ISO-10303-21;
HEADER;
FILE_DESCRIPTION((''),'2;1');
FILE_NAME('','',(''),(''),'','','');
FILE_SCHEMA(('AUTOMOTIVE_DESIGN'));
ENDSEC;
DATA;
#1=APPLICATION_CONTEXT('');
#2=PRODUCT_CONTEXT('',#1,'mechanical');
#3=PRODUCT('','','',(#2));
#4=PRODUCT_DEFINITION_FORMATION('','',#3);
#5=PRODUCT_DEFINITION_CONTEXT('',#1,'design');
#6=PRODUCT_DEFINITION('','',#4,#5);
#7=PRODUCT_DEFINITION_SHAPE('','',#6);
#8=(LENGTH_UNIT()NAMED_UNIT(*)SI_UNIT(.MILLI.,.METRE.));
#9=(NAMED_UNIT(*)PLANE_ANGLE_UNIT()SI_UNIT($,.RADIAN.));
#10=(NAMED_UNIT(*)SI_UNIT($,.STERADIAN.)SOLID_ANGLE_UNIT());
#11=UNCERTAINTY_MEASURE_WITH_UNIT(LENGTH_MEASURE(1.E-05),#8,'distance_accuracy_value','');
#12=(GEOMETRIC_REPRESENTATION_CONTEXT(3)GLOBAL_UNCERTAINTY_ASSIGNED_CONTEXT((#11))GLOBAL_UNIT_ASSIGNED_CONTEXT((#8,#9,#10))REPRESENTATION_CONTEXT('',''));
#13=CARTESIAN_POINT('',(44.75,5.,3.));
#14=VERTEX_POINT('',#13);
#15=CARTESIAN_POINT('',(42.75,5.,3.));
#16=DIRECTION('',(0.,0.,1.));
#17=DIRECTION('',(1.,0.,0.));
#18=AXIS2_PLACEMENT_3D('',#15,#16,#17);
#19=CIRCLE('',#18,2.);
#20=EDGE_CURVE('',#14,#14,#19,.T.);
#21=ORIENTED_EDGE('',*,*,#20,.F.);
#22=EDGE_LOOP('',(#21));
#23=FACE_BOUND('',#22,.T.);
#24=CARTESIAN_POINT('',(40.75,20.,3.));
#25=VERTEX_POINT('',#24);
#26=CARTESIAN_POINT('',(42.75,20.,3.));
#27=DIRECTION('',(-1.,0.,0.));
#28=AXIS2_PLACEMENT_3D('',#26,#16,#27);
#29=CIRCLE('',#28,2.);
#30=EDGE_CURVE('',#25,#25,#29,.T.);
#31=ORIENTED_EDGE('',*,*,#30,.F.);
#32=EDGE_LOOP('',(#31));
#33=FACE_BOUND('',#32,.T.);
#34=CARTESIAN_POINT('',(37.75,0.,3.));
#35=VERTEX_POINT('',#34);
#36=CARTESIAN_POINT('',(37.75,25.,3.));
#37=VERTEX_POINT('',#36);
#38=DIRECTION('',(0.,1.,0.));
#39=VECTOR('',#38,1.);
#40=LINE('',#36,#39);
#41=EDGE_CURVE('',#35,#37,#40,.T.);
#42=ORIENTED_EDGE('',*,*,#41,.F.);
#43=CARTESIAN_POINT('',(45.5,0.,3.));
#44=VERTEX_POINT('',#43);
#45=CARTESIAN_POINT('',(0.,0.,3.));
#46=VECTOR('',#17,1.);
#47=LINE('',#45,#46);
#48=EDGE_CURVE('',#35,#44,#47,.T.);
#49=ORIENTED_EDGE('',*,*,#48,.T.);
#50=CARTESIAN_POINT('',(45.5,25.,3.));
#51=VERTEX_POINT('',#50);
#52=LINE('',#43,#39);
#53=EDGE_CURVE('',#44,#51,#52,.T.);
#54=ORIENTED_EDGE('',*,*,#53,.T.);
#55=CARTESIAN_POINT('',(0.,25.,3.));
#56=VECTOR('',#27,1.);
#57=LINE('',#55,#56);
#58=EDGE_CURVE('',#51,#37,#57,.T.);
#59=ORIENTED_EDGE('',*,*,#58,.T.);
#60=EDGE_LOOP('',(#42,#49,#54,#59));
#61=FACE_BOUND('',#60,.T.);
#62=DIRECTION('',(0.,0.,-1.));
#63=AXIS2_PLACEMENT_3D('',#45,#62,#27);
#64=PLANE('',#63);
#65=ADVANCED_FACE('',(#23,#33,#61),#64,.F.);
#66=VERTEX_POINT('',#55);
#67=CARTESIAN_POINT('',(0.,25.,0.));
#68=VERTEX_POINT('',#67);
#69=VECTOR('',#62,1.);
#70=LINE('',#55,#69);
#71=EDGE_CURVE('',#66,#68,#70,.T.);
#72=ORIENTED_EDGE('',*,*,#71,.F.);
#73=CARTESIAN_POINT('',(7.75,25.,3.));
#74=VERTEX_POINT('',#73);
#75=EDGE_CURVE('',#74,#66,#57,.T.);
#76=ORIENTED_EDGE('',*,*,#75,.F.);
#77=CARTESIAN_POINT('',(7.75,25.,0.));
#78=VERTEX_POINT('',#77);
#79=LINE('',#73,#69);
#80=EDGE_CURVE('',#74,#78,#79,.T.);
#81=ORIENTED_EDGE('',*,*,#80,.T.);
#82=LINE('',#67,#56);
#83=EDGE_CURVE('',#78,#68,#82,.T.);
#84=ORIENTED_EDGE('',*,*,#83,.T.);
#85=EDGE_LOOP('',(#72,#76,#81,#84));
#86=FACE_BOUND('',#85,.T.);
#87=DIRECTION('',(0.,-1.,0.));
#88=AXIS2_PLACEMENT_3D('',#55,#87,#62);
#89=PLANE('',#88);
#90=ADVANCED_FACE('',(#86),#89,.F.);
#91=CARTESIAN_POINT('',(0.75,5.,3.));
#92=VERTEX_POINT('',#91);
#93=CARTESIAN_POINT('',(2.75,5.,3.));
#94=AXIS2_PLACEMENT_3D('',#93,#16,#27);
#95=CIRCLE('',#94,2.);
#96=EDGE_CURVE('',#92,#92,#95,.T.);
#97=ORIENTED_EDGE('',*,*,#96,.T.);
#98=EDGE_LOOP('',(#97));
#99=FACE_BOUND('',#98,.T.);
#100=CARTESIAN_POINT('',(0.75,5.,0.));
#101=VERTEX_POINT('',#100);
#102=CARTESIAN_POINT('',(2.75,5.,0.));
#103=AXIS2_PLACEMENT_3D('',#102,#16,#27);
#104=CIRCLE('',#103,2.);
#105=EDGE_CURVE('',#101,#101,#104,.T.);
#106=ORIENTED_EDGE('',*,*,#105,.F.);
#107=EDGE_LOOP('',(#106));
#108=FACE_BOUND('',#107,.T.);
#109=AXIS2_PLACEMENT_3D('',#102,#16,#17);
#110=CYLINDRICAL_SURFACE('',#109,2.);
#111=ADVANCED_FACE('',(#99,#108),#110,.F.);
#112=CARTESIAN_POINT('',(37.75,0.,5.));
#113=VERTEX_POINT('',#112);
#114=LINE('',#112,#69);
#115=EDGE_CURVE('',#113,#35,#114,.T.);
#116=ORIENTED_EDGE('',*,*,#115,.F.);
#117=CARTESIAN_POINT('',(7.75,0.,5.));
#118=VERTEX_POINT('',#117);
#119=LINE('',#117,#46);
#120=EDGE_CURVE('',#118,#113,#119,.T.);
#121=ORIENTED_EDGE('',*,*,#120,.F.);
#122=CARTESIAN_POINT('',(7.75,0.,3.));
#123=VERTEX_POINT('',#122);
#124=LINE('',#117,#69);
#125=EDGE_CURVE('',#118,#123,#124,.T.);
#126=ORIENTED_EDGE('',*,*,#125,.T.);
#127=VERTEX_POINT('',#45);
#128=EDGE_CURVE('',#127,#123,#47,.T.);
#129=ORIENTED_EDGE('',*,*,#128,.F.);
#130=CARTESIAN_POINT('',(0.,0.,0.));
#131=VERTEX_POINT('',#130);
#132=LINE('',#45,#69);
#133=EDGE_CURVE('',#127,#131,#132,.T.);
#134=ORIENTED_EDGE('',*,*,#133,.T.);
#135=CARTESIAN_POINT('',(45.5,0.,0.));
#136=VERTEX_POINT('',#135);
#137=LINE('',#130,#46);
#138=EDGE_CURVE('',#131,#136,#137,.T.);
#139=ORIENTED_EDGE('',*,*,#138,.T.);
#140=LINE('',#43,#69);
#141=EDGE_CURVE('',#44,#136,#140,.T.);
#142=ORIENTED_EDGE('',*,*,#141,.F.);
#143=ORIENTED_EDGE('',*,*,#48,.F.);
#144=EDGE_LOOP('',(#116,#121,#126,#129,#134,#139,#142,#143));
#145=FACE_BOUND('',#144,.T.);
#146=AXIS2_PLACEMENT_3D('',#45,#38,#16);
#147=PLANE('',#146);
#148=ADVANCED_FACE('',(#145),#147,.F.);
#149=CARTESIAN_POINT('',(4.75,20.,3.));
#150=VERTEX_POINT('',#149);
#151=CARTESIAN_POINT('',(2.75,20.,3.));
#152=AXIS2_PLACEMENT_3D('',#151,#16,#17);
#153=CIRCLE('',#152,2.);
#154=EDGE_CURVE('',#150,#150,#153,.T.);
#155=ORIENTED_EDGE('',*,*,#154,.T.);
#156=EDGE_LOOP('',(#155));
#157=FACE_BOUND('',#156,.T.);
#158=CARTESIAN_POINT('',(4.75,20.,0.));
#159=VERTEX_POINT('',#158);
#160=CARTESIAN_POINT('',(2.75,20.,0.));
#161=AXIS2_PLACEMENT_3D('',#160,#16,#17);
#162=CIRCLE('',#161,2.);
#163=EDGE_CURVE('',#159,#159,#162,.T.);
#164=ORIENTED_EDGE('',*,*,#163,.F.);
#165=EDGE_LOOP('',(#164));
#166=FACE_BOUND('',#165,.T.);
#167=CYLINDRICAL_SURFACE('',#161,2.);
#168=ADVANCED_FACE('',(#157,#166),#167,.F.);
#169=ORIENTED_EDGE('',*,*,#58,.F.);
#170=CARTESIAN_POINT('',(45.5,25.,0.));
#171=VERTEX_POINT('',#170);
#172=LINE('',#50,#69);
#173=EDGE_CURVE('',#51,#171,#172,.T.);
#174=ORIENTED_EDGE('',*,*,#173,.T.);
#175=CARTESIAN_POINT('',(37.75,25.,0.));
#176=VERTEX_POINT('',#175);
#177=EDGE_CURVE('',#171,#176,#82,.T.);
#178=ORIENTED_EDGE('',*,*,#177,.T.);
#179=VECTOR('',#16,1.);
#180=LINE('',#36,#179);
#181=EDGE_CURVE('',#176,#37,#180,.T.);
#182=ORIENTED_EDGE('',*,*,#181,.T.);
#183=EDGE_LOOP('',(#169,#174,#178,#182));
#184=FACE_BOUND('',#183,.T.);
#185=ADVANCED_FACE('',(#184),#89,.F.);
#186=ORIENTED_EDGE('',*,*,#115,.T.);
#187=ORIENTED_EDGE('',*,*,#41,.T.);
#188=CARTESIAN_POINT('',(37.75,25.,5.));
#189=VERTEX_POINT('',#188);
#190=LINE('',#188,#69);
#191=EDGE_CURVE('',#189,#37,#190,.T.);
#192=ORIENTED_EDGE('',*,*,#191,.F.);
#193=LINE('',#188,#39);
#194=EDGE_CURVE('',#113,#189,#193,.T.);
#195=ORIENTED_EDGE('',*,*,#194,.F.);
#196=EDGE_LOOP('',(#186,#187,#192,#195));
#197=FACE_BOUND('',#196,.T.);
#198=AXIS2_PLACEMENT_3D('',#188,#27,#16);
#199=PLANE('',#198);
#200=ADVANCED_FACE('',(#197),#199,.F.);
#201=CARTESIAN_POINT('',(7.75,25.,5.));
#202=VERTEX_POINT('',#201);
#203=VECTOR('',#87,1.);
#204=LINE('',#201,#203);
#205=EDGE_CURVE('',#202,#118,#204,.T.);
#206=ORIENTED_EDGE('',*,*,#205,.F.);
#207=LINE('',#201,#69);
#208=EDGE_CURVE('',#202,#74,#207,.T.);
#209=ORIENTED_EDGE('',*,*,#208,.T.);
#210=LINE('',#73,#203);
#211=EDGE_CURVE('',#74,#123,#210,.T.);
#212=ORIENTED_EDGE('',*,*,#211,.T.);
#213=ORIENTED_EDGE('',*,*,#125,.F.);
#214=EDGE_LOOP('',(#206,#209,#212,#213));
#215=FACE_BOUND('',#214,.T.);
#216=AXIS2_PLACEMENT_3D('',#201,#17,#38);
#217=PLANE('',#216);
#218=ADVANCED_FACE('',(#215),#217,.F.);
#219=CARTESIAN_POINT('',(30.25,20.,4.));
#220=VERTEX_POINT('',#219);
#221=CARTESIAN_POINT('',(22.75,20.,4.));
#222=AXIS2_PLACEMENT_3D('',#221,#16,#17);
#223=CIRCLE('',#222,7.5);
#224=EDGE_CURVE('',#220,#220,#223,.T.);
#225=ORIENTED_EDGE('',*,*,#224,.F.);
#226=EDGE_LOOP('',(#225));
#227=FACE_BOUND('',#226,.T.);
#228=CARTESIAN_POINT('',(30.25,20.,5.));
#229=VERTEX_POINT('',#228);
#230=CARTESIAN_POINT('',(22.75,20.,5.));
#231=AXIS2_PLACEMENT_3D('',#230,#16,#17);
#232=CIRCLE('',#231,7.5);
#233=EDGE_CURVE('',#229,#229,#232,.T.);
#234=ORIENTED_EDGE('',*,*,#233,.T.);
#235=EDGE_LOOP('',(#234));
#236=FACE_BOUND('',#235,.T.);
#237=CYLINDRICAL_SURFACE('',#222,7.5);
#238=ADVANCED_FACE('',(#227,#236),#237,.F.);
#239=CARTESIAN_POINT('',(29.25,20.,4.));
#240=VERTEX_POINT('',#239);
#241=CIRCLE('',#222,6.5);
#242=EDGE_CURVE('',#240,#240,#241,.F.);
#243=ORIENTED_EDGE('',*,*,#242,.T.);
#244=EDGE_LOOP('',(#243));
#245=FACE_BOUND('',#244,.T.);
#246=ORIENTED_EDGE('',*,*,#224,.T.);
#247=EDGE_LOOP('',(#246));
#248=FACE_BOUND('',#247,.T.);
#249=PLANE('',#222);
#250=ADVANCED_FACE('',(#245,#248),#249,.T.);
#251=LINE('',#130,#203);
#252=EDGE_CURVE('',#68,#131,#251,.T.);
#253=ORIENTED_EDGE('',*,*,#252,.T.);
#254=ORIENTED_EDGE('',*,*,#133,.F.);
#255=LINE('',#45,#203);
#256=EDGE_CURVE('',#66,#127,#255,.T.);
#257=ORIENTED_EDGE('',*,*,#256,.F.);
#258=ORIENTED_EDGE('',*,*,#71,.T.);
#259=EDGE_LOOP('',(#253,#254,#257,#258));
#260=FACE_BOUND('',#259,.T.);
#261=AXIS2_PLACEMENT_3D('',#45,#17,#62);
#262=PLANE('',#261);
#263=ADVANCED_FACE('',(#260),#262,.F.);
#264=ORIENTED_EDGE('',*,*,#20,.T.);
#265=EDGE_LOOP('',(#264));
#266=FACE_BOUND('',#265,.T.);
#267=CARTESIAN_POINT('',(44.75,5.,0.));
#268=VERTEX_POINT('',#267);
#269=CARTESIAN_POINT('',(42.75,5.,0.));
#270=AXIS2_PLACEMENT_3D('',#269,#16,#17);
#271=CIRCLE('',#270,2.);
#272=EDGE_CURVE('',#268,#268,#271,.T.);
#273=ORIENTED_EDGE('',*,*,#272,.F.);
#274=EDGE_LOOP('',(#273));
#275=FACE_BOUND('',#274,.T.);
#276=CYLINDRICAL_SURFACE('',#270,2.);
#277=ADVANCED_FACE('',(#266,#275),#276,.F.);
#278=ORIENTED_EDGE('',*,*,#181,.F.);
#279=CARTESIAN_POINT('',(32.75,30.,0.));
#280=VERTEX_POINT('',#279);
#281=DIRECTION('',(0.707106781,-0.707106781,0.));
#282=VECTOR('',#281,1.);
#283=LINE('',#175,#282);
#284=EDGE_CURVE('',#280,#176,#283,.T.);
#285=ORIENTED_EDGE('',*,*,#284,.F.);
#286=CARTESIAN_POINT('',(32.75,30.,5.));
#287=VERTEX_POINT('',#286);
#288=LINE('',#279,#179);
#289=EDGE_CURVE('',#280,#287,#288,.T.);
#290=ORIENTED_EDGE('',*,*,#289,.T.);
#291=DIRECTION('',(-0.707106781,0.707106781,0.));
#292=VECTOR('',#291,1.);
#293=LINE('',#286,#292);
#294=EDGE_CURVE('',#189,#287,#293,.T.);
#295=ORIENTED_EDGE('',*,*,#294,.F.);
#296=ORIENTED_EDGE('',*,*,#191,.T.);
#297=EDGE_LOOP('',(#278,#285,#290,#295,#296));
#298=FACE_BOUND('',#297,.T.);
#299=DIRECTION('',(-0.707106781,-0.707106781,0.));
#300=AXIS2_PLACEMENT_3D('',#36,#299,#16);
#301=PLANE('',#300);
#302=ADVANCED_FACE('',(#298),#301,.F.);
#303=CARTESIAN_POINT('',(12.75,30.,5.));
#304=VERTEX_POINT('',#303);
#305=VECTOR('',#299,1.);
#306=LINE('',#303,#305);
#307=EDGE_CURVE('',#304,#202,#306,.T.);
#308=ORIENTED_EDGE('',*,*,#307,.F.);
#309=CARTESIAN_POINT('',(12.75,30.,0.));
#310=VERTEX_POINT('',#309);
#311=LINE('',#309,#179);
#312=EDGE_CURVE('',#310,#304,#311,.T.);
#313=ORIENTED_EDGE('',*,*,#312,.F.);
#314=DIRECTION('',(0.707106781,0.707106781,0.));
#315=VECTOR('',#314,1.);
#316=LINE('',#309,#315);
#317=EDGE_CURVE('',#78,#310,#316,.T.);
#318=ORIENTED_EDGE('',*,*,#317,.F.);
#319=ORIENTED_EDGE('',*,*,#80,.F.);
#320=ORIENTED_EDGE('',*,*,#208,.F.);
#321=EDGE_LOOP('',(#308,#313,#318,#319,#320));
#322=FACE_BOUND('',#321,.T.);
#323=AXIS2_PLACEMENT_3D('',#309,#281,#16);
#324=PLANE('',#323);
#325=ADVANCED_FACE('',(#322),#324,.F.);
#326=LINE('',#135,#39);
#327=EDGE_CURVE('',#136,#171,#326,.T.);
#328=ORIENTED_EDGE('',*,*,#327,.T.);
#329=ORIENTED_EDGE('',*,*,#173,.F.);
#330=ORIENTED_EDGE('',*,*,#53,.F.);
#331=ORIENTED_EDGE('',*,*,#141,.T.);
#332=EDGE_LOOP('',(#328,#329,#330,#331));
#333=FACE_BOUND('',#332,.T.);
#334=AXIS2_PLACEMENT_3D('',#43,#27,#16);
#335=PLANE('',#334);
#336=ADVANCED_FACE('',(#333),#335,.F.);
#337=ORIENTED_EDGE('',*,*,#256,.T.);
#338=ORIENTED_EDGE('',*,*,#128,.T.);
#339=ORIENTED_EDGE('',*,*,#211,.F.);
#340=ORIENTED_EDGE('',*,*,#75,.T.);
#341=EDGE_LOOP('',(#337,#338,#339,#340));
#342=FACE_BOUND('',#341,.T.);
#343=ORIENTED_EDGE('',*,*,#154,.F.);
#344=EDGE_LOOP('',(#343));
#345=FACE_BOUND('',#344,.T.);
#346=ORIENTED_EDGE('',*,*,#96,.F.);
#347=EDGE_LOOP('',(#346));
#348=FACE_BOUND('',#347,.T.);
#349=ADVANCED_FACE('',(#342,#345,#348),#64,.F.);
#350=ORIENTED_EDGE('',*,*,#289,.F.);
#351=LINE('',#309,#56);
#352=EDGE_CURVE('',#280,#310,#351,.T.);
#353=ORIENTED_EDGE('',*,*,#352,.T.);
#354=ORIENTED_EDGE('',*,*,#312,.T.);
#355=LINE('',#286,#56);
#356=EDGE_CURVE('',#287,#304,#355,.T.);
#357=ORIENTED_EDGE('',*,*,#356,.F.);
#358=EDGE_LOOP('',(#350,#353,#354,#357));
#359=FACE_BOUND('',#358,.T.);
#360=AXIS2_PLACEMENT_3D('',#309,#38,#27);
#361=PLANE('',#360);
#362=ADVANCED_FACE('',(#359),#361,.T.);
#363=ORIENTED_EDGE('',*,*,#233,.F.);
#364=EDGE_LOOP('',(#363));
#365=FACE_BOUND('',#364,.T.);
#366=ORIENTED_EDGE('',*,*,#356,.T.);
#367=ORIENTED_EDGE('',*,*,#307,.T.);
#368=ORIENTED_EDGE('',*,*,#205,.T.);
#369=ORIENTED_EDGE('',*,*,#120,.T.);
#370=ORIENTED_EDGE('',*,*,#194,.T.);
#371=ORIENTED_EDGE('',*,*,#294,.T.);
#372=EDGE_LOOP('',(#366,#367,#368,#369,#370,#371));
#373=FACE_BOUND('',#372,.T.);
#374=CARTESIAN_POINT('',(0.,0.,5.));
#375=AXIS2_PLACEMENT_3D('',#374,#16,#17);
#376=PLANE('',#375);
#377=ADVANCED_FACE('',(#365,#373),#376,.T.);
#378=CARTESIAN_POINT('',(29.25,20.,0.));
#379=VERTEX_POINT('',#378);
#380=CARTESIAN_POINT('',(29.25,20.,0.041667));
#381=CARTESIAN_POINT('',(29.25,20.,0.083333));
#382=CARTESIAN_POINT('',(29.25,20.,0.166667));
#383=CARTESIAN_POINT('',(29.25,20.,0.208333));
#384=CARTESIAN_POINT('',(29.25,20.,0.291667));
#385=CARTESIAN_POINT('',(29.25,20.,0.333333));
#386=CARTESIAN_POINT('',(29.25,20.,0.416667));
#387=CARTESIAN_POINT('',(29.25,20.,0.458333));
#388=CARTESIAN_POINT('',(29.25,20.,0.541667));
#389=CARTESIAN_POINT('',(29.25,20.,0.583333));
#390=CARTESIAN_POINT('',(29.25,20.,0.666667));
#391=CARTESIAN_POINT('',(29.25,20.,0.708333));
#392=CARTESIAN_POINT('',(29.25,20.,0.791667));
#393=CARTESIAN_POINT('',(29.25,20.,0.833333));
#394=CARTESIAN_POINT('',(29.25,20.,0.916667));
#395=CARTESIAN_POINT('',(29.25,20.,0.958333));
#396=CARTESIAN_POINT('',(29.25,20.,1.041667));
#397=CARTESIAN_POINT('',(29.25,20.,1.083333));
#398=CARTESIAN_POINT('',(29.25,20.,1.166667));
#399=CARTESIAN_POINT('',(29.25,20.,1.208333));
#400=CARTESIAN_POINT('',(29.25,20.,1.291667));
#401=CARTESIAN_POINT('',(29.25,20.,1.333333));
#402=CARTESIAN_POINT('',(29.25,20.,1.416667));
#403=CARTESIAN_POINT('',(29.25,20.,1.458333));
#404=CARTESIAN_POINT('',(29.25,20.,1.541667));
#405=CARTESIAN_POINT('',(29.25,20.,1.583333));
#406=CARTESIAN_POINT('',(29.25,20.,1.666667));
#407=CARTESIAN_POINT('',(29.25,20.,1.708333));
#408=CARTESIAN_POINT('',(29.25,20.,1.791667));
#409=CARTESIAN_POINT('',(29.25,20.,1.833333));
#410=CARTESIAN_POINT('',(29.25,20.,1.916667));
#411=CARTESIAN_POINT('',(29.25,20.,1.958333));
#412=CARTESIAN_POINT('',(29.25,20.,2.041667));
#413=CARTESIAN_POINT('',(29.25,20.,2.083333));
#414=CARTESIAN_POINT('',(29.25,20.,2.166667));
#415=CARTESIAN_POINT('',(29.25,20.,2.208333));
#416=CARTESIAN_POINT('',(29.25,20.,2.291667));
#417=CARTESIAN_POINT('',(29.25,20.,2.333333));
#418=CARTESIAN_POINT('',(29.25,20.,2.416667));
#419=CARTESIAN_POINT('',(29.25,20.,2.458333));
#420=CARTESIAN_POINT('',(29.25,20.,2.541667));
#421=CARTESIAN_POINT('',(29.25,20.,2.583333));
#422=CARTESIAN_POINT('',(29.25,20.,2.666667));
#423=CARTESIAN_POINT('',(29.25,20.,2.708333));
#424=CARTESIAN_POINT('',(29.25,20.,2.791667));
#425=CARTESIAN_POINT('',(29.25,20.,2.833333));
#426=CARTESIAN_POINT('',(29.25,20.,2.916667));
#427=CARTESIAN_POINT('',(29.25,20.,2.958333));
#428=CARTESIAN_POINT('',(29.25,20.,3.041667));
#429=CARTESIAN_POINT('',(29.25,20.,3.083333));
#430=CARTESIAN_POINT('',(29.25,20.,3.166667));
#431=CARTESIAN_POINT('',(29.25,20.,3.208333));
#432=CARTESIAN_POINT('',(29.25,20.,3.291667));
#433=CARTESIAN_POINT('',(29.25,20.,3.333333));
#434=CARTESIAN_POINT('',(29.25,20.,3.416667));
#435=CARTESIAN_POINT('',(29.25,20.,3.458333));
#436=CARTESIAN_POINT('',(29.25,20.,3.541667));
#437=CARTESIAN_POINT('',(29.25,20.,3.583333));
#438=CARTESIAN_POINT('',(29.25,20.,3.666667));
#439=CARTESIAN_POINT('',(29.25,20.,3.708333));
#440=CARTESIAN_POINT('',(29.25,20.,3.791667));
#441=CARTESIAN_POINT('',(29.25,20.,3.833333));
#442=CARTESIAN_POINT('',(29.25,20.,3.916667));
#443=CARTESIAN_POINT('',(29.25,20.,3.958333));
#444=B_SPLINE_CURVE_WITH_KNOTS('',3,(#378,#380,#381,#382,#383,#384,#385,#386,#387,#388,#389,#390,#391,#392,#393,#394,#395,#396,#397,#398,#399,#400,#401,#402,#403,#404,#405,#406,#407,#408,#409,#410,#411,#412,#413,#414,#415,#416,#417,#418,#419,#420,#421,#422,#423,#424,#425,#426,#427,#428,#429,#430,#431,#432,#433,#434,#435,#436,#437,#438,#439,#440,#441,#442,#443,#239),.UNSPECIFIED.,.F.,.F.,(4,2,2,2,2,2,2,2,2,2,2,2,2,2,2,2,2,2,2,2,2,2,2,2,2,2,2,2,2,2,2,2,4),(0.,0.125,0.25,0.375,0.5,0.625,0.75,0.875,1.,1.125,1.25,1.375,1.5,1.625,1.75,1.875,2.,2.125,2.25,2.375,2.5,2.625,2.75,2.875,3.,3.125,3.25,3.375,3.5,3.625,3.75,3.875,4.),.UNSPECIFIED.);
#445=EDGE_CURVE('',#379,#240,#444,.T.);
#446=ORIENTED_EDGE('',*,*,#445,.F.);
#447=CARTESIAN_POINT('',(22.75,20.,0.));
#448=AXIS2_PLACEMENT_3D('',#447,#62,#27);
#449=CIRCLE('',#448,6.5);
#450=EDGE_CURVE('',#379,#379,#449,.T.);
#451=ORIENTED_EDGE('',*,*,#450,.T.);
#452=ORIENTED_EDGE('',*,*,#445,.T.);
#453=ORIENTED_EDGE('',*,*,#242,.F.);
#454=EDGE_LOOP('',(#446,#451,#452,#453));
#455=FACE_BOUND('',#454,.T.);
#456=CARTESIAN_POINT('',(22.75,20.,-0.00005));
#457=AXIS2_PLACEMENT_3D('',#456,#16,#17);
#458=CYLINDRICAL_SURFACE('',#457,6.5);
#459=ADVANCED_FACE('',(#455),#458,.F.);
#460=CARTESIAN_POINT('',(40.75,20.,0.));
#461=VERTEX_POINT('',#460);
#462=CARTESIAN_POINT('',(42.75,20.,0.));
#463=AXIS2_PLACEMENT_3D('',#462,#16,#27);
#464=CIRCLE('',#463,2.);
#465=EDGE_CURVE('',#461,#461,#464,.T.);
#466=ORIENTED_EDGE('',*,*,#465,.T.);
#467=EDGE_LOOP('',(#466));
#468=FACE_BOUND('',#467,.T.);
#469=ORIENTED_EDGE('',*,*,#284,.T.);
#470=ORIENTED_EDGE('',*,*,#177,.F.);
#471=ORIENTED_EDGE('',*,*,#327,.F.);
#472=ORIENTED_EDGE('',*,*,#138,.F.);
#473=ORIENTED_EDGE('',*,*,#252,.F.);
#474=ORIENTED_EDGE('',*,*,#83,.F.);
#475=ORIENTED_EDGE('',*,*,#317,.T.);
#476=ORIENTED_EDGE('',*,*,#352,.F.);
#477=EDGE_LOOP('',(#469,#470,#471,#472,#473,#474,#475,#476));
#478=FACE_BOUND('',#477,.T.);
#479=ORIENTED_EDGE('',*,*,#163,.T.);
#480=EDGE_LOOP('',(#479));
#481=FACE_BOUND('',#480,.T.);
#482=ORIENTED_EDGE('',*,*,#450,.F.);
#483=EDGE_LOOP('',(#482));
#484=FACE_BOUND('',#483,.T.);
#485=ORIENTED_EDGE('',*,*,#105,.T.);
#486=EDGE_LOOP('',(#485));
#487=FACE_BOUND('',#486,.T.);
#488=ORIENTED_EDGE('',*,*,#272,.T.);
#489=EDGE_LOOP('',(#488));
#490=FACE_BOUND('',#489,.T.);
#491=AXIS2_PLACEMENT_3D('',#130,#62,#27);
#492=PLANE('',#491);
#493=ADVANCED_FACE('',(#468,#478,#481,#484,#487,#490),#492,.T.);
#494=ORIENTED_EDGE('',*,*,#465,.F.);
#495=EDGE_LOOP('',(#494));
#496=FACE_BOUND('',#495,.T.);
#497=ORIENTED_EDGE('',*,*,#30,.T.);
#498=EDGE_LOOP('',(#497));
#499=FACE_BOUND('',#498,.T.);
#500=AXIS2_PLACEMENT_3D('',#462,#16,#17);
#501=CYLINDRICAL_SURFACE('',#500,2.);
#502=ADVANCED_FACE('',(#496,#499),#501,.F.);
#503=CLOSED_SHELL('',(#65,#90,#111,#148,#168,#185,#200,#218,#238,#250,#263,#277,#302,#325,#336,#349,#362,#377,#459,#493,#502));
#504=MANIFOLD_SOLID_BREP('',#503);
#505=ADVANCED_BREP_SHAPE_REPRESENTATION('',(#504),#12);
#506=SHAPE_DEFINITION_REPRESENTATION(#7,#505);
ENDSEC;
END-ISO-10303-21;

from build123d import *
from build123d.topology import SkipClean

# Parameters (mm, degrees)
ESQUISSE1_W             = 45.5
ESQUISSE1_H             = 25
BOSS_EXTRU_1_DEPTH      = 3
ESQUISSE2_R             = 2
ENL_V_MAT_EXTRU_1_DEPTH = 3
ESQUISSE4_W             = 20
ESQUISSE4_H             = 5
BOSS_EXTRU_2_DEPTH      = 3
ESQUISSE3_R             = 6.5
ENL_V_MAT_EXTRU_2_DEPTH = 55.582506355
CHANFREIN1_SIZE         = 5
BOSS_EXTRU_3_START      = 2
ESQUISSE5_R             = 6.5
BOSS_EXTRU_3_DEPTH      = 2
ESQUISSE6_R             = 7.5
ENL_V_MAT_EXTRU_3_DEPTH = 1


with BuildPart() as part:
    # Esquisse1 → Boss.-Extru.1 (new body)
    with BuildSketch(Plane.XY):
        with Locations((22.75, 12.5)):
            Rectangle(ESQUISSE1_W, ESQUISSE1_H)
    extrude(amount=BOSS_EXTRU_1_DEPTH)

    # Esquisse2 → Enlèv. mat.-Extru.1 (cut)
    with BuildSketch(Plane.XY.offset(3)):
        with Locations((2.75, 20)):
            Circle(ESQUISSE2_R)
        with Locations(Location((42.75, 20, 0), (0, 0, 180))):
            Circle(ESQUISSE2_R)
        with Locations((42.75, 5)):
            Circle(ESQUISSE2_R)
        with Locations(Location((2.75, 5, 0), (0, 0, 180))):
            Circle(ESQUISSE2_R)
    extrude(amount=-ENL_V_MAT_EXTRU_1_DEPTH, mode=Mode.SUBTRACT)

    # Esquisse4 → Boss.-Extru.2 (add)
    with BuildSketch(Plane.XY.offset(3)):
        with Locations((22.75, 27.5)):
            Rectangle(ESQUISSE4_W, ESQUISSE4_H)
    extrude(amount=-BOSS_EXTRU_2_DEPTH)

    # Esquisse3 → Enlèv. mat.-Extru.2 (cut, through all)
    with BuildSketch(Plane.XY.offset(3)):
        with Locations((22.75, 20)):
            Circle(ESQUISSE3_R)
    extrude(amount=-ENL_V_MAT_EXTRU_2_DEPTH, mode=Mode.SUBTRACT)

    # Chanfrein1
    chanfrein1_edges = [part.edges().sort_by_distance(p)[0] for p in [
        (32.75, 25, 1.5),
        (12.75, 25, 1.5),
    ]]
    chamfer(chanfrein1_edges, length=CHANFREIN1_SIZE - 0.0001)  # a hair under: the kernel refuses the full size

    # Esquisse5 → Boss.-Extru.3 (add)
    with SkipClean():  # the faces are left unmerged after this step: merging them gives an invalid solid
        with BuildSketch(Plane.XY.offset(3).offset(BOSS_EXTRU_3_START)):
            Polygon((32.75, 30), (12.75, 30), (7.75, 25), (7.75, 0), (37.75, 0), (37.75, 25), align=None)
            with Locations((22.75, 20)):
                Circle(ESQUISSE5_R, mode=Mode.SUBTRACT)
        extrude(amount=-BOSS_EXTRU_3_DEPTH)

    # Esquisse6 → Enlèv. mat.-Extru.3 (cut)
    with SkipClean():  # the faces are left unmerged after this step: merging them gives an invalid solid
        with BuildSketch(Plane.XY.offset(5)):
            with Locations((22.75, 20)):
                Circle(ESQUISSE6_R)
        extrude(amount=-ENL_V_MAT_EXTRU_3_DEPTH, mode=Mode.SUBTRACT)


solid = part.part
